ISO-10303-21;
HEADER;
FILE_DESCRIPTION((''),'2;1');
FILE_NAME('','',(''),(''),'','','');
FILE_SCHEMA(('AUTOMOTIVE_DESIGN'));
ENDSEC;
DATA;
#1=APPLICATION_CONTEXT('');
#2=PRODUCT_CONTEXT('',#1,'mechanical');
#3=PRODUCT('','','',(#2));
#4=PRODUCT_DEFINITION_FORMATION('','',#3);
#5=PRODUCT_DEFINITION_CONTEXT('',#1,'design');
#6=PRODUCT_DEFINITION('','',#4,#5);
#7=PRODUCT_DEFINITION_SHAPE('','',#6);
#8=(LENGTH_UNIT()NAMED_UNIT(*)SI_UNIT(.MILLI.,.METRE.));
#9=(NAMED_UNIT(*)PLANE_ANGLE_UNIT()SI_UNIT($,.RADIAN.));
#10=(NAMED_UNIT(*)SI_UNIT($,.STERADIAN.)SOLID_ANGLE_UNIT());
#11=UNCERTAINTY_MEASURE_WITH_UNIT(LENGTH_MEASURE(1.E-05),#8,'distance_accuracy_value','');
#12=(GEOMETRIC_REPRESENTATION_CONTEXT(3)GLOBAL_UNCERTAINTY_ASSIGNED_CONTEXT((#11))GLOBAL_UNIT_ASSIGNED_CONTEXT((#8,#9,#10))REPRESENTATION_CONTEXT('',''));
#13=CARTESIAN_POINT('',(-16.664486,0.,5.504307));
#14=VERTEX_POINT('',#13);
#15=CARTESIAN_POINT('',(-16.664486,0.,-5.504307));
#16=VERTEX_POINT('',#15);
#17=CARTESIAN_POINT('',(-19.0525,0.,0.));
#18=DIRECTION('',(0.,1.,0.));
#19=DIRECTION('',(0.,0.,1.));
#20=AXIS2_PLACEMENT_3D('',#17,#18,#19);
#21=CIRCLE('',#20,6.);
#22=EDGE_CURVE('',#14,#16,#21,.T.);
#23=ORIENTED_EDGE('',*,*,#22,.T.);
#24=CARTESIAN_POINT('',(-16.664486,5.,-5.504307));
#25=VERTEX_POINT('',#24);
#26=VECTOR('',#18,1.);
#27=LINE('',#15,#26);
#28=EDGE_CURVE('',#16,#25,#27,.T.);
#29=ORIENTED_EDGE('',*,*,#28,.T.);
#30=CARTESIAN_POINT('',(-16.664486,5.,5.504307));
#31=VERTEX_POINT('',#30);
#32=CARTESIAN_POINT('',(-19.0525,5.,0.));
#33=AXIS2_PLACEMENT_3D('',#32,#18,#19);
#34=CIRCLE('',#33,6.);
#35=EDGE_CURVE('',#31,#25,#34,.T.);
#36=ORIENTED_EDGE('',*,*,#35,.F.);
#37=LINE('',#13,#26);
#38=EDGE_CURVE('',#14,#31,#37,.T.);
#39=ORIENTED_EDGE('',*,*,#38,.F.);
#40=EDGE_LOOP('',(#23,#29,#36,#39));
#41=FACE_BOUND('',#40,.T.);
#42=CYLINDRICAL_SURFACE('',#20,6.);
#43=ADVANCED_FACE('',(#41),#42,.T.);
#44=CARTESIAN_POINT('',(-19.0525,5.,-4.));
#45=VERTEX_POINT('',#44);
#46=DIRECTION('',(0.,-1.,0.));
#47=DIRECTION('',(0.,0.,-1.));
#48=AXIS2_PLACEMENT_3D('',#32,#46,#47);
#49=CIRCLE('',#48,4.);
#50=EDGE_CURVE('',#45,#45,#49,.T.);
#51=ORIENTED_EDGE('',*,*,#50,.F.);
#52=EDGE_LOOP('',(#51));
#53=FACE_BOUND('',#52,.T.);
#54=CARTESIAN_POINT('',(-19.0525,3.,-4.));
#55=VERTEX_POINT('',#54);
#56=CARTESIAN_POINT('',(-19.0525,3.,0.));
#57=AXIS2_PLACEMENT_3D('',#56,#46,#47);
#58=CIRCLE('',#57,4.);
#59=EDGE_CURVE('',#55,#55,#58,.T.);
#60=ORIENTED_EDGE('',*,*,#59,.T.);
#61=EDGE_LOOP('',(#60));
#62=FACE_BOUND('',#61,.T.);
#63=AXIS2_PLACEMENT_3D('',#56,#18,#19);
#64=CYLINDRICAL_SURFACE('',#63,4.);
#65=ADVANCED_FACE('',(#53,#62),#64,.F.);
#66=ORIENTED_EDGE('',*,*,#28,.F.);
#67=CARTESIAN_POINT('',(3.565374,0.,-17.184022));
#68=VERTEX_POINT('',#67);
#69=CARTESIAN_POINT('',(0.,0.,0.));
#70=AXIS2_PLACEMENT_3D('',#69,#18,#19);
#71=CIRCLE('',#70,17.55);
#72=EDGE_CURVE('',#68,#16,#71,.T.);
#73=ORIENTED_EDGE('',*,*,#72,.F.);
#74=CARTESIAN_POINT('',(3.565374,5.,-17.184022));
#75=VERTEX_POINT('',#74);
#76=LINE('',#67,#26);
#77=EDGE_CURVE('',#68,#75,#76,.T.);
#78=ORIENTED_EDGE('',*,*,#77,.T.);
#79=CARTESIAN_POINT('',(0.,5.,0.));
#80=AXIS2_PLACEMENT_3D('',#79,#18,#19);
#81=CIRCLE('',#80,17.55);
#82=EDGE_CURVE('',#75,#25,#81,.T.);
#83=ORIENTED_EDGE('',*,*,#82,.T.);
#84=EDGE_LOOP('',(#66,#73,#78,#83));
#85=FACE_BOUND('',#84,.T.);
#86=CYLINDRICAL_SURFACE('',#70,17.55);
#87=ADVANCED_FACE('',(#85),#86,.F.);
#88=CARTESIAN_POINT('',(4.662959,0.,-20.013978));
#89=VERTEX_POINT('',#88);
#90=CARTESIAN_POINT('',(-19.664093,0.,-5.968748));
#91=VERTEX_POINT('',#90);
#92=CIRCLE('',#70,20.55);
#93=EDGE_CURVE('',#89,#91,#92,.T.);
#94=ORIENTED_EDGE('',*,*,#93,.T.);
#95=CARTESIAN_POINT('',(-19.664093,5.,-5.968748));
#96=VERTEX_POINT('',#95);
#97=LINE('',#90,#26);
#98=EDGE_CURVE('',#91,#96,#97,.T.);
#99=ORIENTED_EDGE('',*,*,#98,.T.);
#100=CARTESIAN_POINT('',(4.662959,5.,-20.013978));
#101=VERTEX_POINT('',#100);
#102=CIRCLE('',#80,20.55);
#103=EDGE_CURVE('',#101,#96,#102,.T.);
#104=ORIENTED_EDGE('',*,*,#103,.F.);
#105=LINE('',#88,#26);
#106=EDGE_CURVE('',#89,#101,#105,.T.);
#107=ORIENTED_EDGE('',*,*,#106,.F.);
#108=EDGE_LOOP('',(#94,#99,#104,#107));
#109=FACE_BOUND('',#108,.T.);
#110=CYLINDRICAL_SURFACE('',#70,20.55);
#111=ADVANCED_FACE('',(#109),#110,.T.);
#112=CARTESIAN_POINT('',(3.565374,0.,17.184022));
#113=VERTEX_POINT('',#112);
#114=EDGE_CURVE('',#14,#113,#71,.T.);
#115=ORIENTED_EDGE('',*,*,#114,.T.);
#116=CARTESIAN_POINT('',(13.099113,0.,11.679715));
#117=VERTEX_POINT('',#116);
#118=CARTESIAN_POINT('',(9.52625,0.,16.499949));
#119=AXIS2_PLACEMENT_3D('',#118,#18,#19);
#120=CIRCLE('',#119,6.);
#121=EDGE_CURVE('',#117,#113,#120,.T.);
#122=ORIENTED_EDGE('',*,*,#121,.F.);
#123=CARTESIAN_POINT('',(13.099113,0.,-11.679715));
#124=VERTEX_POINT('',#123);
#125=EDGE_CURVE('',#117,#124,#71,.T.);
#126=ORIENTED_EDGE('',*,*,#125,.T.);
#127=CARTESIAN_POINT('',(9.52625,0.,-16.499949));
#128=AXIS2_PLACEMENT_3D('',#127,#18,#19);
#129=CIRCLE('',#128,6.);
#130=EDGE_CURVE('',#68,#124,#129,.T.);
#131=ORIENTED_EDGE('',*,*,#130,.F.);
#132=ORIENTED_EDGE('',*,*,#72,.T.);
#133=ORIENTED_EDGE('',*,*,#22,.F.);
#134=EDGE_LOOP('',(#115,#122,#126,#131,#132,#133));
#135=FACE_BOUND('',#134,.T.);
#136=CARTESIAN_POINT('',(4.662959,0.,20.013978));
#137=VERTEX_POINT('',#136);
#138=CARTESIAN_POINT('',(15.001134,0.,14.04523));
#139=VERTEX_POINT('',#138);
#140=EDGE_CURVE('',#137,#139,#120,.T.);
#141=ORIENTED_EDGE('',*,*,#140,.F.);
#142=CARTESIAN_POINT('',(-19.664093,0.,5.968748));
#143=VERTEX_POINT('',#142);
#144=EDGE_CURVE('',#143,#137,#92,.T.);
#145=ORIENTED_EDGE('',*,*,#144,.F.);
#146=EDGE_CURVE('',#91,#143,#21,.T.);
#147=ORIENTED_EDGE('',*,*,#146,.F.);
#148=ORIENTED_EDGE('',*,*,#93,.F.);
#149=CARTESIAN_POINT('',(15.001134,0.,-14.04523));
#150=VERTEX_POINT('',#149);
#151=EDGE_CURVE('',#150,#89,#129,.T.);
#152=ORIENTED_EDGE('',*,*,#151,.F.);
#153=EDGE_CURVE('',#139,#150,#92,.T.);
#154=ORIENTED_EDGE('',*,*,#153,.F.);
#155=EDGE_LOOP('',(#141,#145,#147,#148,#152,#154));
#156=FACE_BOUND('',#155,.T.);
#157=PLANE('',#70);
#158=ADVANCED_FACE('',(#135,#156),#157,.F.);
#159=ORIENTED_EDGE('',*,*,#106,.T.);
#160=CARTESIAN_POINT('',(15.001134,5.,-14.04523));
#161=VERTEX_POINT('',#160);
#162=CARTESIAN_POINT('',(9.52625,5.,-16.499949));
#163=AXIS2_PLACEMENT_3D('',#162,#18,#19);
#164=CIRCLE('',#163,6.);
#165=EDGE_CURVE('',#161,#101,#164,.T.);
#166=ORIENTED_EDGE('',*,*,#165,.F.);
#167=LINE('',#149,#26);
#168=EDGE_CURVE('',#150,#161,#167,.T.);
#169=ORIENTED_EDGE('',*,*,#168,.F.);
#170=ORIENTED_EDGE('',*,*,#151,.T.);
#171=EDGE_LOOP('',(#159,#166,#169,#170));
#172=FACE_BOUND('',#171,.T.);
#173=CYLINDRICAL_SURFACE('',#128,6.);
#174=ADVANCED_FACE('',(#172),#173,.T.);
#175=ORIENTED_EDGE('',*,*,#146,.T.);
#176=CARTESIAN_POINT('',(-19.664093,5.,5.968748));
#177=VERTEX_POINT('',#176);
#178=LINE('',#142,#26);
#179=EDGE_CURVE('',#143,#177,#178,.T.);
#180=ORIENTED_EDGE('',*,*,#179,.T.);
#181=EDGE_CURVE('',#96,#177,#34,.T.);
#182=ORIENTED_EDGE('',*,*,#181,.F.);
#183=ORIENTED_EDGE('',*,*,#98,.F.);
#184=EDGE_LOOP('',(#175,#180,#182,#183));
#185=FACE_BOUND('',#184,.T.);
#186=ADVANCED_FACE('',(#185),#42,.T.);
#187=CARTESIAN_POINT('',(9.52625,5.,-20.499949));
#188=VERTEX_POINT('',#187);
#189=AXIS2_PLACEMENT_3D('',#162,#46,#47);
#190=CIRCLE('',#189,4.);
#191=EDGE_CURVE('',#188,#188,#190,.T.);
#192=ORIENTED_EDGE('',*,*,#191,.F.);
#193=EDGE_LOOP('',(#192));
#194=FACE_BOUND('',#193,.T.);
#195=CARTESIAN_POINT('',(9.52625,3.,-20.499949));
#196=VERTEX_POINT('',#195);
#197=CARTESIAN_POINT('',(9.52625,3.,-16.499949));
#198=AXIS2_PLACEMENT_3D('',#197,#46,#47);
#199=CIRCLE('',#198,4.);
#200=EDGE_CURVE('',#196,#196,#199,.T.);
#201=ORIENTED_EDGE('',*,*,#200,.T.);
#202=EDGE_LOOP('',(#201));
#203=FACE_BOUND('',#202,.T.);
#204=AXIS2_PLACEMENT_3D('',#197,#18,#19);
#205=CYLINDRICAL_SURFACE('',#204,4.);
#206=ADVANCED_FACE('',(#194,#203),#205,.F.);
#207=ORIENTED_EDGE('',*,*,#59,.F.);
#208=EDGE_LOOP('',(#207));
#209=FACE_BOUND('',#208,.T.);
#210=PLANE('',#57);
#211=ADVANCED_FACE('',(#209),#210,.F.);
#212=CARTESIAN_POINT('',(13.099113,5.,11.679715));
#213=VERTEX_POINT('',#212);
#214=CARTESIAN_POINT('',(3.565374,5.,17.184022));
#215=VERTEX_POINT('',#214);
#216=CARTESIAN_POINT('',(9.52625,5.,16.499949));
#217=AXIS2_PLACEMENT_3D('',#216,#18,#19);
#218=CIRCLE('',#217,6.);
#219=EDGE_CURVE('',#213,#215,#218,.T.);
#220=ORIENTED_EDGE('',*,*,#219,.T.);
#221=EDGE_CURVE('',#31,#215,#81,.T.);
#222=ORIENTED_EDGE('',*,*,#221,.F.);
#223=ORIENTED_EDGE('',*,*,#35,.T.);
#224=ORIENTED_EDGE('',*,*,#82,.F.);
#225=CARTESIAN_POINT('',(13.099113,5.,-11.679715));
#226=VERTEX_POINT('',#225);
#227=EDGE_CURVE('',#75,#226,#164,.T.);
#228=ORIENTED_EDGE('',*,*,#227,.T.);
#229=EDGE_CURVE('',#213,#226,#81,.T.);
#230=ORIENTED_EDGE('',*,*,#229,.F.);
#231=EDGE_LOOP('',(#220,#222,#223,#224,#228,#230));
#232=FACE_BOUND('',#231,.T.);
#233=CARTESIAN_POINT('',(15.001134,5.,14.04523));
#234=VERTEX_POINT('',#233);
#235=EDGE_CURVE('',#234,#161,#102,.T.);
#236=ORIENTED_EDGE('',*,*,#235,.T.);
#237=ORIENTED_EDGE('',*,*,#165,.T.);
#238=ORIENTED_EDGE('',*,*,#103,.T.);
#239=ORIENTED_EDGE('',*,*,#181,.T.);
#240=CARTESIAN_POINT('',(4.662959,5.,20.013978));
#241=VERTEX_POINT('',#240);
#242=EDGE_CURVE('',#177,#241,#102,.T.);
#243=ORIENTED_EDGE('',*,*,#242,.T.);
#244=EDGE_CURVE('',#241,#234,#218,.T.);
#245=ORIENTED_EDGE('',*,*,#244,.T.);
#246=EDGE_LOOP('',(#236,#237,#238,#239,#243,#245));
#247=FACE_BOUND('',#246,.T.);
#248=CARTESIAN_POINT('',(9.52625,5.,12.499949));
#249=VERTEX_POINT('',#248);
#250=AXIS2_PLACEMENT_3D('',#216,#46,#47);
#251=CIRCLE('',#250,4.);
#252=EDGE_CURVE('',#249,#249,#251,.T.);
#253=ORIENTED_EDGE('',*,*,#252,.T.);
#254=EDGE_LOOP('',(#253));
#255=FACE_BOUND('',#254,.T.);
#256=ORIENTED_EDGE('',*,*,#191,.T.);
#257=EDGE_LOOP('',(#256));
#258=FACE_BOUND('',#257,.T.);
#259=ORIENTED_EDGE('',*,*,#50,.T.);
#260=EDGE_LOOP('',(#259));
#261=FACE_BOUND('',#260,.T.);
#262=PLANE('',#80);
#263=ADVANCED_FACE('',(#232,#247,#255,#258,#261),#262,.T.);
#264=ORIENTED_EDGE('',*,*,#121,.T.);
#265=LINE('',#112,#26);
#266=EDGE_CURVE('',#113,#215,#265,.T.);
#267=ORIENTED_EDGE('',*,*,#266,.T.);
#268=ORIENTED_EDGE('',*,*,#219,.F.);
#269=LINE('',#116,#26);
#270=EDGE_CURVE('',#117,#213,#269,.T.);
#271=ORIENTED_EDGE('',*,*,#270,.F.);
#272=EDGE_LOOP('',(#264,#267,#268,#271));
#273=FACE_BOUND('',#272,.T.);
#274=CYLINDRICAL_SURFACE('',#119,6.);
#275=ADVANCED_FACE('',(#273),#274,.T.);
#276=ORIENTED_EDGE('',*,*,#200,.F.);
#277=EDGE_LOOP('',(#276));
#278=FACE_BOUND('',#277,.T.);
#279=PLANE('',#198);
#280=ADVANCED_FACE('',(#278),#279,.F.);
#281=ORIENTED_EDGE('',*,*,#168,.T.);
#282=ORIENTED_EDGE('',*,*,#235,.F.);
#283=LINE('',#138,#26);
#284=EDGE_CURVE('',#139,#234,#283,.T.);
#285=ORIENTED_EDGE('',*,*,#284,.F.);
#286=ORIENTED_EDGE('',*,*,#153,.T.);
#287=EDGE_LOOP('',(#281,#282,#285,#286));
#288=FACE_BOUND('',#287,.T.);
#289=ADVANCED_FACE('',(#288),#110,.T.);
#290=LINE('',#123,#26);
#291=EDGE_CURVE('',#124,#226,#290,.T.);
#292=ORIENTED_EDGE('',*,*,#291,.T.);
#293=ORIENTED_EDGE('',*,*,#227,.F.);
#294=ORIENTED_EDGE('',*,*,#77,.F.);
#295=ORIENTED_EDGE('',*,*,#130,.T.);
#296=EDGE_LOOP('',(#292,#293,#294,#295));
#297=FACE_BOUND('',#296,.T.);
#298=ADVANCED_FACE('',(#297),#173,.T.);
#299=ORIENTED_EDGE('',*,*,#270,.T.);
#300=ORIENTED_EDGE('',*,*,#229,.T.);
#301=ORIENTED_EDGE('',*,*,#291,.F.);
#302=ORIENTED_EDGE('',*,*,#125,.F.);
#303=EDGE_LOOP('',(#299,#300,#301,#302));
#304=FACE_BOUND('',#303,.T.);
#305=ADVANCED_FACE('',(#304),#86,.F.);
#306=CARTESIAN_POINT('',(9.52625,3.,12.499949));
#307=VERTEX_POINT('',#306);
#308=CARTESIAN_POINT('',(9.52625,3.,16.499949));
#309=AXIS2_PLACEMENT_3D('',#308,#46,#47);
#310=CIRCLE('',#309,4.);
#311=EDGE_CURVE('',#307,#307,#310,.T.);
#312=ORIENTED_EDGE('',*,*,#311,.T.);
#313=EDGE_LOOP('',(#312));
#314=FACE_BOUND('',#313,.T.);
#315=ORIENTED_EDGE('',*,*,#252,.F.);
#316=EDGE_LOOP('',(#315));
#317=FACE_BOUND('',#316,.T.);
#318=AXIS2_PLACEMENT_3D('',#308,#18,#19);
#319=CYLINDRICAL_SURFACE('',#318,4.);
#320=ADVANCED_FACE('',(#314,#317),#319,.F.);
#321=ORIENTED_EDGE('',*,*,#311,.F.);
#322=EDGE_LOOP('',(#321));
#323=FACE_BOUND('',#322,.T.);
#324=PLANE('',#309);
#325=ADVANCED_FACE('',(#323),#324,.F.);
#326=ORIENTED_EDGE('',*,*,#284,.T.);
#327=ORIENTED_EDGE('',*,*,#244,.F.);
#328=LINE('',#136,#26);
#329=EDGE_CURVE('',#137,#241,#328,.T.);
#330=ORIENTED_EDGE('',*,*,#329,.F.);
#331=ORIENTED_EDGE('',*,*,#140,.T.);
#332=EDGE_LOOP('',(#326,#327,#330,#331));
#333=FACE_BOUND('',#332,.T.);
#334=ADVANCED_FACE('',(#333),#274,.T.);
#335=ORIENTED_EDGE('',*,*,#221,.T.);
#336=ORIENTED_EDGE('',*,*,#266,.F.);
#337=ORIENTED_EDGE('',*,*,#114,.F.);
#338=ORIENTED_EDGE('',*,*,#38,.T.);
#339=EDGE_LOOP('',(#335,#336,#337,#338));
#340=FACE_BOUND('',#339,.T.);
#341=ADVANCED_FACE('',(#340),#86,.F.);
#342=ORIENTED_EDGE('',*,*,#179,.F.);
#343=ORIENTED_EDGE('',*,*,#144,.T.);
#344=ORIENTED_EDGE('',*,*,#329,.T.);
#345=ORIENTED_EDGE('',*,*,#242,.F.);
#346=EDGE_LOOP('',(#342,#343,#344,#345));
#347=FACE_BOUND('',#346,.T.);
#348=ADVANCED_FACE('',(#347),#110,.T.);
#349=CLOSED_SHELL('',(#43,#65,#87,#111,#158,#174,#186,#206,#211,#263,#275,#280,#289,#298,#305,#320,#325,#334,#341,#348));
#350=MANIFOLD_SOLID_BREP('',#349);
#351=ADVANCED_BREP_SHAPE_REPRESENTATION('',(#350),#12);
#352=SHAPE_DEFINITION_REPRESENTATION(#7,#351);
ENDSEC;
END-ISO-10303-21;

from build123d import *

# Parameters (mm, degrees)
SKETCH2_R           = 26
BOSS_EXTRUDE2_DEPTH = 5
SKETCH3_R           = 4
CUT_EXTRUDE1_DEPTH  = 2
SKETCH5_R           = 26
CUT_EXTRUDE3_DEPTH  = 38.107950631


with BuildPart() as part:
    # Sketch2 → Boss-Extrude2 (new body)
    with BuildSketch(Plane(origin=(0, 0, 0), x_dir=(1, 0, 0), z_dir=(0, 1, 0))):
        Circle(SKETCH2_R)
    extrude(amount=BOSS_EXTRUDE2_DEPTH)

    # Sketch3 → Cut-Extrude1 (cut)
    with BuildSketch(Plane.XZ.offset(-5)):
        with Locations((9.52625, -16.499949006)):
            Circle(SKETCH3_R)
        with Locations((9.52625, 16.499949006)):
            Circle(SKETCH3_R)
        with Locations((-19.0525, 0)):
            Circle(SKETCH3_R)
    extrude(amount=CUT_EXTRUDE1_DEPTH, mode=Mode.SUBTRACT)

    # Sketch5 → Cut-Extrude3 (cut, through all)
    # profile 1 of 2: a face of its own
    with BuildSketch(Plane(origin=(0, 5, 0), x_dir=(1, 0, 0), z_dir=(0, 1, 0))):
        Circle(SKETCH5_R)
        with BuildLine():
            ThreePointArc((-19.664092803, 5.96874813), (-10.275, 17.796822048), (4.662958892, 20.013977975))
            ThreePointArc((4.662958892, 20.013977975), (12.52625, 21.696101428), (15.001133911, 14.045229844))
            ThreePointArc((15.001133911, 14.045229844), (20.55, 0), (15.001133911, -14.045229844))
            ThreePointArc((15.001133911, -14.045229844), (12.52625, -21.696101428), (4.662958892, -20.013977975))
            ThreePointArc((4.662958892, -20.013977975), (-10.275, -17.796822048), (-19.664092803, -5.96874813))
            ThreePointArc((-19.664092803, -5.96874813), (-25.0525, 0), (-19.664092803, 5.96874813))
        make_face(mode=Mode.SUBTRACT)
    # profile 2 of 2: a face of its own
    with BuildSketch(Plane(origin=(0, 5, 0), x_dir=(1, 0, 0), z_dir=(0, 1, 0))):
        with BuildLine():
            ThreePointArc((13.099112583, 11.679715302), (6.52625, 11.303796583), (3.565373869, 17.184021915))
            ThreePointArc((3.565373869, 17.184021915), (-8.775, 15.198745836), (-16.664486452, 5.504306613))
            ThreePointArc((-16.664486452, 5.504306613), (-13.0525, 0), (-16.664486452, -5.504306613))
            ThreePointArc((-16.664486452, -5.504306613), (-8.775, -15.198745836), (3.565373869, -17.184021915))
            ThreePointArc((3.565373869, -17.184021915), (6.52625, -11.303796583), (13.099112583, -11.679715302))
            ThreePointArc((13.099112583, -11.679715302), (17.55, 0), (13.099112583, 11.679715302))
        make_face()
    extrude(amount=-CUT_EXTRUDE3_DEPTH, mode=Mode.SUBTRACT)


solid = part.part
